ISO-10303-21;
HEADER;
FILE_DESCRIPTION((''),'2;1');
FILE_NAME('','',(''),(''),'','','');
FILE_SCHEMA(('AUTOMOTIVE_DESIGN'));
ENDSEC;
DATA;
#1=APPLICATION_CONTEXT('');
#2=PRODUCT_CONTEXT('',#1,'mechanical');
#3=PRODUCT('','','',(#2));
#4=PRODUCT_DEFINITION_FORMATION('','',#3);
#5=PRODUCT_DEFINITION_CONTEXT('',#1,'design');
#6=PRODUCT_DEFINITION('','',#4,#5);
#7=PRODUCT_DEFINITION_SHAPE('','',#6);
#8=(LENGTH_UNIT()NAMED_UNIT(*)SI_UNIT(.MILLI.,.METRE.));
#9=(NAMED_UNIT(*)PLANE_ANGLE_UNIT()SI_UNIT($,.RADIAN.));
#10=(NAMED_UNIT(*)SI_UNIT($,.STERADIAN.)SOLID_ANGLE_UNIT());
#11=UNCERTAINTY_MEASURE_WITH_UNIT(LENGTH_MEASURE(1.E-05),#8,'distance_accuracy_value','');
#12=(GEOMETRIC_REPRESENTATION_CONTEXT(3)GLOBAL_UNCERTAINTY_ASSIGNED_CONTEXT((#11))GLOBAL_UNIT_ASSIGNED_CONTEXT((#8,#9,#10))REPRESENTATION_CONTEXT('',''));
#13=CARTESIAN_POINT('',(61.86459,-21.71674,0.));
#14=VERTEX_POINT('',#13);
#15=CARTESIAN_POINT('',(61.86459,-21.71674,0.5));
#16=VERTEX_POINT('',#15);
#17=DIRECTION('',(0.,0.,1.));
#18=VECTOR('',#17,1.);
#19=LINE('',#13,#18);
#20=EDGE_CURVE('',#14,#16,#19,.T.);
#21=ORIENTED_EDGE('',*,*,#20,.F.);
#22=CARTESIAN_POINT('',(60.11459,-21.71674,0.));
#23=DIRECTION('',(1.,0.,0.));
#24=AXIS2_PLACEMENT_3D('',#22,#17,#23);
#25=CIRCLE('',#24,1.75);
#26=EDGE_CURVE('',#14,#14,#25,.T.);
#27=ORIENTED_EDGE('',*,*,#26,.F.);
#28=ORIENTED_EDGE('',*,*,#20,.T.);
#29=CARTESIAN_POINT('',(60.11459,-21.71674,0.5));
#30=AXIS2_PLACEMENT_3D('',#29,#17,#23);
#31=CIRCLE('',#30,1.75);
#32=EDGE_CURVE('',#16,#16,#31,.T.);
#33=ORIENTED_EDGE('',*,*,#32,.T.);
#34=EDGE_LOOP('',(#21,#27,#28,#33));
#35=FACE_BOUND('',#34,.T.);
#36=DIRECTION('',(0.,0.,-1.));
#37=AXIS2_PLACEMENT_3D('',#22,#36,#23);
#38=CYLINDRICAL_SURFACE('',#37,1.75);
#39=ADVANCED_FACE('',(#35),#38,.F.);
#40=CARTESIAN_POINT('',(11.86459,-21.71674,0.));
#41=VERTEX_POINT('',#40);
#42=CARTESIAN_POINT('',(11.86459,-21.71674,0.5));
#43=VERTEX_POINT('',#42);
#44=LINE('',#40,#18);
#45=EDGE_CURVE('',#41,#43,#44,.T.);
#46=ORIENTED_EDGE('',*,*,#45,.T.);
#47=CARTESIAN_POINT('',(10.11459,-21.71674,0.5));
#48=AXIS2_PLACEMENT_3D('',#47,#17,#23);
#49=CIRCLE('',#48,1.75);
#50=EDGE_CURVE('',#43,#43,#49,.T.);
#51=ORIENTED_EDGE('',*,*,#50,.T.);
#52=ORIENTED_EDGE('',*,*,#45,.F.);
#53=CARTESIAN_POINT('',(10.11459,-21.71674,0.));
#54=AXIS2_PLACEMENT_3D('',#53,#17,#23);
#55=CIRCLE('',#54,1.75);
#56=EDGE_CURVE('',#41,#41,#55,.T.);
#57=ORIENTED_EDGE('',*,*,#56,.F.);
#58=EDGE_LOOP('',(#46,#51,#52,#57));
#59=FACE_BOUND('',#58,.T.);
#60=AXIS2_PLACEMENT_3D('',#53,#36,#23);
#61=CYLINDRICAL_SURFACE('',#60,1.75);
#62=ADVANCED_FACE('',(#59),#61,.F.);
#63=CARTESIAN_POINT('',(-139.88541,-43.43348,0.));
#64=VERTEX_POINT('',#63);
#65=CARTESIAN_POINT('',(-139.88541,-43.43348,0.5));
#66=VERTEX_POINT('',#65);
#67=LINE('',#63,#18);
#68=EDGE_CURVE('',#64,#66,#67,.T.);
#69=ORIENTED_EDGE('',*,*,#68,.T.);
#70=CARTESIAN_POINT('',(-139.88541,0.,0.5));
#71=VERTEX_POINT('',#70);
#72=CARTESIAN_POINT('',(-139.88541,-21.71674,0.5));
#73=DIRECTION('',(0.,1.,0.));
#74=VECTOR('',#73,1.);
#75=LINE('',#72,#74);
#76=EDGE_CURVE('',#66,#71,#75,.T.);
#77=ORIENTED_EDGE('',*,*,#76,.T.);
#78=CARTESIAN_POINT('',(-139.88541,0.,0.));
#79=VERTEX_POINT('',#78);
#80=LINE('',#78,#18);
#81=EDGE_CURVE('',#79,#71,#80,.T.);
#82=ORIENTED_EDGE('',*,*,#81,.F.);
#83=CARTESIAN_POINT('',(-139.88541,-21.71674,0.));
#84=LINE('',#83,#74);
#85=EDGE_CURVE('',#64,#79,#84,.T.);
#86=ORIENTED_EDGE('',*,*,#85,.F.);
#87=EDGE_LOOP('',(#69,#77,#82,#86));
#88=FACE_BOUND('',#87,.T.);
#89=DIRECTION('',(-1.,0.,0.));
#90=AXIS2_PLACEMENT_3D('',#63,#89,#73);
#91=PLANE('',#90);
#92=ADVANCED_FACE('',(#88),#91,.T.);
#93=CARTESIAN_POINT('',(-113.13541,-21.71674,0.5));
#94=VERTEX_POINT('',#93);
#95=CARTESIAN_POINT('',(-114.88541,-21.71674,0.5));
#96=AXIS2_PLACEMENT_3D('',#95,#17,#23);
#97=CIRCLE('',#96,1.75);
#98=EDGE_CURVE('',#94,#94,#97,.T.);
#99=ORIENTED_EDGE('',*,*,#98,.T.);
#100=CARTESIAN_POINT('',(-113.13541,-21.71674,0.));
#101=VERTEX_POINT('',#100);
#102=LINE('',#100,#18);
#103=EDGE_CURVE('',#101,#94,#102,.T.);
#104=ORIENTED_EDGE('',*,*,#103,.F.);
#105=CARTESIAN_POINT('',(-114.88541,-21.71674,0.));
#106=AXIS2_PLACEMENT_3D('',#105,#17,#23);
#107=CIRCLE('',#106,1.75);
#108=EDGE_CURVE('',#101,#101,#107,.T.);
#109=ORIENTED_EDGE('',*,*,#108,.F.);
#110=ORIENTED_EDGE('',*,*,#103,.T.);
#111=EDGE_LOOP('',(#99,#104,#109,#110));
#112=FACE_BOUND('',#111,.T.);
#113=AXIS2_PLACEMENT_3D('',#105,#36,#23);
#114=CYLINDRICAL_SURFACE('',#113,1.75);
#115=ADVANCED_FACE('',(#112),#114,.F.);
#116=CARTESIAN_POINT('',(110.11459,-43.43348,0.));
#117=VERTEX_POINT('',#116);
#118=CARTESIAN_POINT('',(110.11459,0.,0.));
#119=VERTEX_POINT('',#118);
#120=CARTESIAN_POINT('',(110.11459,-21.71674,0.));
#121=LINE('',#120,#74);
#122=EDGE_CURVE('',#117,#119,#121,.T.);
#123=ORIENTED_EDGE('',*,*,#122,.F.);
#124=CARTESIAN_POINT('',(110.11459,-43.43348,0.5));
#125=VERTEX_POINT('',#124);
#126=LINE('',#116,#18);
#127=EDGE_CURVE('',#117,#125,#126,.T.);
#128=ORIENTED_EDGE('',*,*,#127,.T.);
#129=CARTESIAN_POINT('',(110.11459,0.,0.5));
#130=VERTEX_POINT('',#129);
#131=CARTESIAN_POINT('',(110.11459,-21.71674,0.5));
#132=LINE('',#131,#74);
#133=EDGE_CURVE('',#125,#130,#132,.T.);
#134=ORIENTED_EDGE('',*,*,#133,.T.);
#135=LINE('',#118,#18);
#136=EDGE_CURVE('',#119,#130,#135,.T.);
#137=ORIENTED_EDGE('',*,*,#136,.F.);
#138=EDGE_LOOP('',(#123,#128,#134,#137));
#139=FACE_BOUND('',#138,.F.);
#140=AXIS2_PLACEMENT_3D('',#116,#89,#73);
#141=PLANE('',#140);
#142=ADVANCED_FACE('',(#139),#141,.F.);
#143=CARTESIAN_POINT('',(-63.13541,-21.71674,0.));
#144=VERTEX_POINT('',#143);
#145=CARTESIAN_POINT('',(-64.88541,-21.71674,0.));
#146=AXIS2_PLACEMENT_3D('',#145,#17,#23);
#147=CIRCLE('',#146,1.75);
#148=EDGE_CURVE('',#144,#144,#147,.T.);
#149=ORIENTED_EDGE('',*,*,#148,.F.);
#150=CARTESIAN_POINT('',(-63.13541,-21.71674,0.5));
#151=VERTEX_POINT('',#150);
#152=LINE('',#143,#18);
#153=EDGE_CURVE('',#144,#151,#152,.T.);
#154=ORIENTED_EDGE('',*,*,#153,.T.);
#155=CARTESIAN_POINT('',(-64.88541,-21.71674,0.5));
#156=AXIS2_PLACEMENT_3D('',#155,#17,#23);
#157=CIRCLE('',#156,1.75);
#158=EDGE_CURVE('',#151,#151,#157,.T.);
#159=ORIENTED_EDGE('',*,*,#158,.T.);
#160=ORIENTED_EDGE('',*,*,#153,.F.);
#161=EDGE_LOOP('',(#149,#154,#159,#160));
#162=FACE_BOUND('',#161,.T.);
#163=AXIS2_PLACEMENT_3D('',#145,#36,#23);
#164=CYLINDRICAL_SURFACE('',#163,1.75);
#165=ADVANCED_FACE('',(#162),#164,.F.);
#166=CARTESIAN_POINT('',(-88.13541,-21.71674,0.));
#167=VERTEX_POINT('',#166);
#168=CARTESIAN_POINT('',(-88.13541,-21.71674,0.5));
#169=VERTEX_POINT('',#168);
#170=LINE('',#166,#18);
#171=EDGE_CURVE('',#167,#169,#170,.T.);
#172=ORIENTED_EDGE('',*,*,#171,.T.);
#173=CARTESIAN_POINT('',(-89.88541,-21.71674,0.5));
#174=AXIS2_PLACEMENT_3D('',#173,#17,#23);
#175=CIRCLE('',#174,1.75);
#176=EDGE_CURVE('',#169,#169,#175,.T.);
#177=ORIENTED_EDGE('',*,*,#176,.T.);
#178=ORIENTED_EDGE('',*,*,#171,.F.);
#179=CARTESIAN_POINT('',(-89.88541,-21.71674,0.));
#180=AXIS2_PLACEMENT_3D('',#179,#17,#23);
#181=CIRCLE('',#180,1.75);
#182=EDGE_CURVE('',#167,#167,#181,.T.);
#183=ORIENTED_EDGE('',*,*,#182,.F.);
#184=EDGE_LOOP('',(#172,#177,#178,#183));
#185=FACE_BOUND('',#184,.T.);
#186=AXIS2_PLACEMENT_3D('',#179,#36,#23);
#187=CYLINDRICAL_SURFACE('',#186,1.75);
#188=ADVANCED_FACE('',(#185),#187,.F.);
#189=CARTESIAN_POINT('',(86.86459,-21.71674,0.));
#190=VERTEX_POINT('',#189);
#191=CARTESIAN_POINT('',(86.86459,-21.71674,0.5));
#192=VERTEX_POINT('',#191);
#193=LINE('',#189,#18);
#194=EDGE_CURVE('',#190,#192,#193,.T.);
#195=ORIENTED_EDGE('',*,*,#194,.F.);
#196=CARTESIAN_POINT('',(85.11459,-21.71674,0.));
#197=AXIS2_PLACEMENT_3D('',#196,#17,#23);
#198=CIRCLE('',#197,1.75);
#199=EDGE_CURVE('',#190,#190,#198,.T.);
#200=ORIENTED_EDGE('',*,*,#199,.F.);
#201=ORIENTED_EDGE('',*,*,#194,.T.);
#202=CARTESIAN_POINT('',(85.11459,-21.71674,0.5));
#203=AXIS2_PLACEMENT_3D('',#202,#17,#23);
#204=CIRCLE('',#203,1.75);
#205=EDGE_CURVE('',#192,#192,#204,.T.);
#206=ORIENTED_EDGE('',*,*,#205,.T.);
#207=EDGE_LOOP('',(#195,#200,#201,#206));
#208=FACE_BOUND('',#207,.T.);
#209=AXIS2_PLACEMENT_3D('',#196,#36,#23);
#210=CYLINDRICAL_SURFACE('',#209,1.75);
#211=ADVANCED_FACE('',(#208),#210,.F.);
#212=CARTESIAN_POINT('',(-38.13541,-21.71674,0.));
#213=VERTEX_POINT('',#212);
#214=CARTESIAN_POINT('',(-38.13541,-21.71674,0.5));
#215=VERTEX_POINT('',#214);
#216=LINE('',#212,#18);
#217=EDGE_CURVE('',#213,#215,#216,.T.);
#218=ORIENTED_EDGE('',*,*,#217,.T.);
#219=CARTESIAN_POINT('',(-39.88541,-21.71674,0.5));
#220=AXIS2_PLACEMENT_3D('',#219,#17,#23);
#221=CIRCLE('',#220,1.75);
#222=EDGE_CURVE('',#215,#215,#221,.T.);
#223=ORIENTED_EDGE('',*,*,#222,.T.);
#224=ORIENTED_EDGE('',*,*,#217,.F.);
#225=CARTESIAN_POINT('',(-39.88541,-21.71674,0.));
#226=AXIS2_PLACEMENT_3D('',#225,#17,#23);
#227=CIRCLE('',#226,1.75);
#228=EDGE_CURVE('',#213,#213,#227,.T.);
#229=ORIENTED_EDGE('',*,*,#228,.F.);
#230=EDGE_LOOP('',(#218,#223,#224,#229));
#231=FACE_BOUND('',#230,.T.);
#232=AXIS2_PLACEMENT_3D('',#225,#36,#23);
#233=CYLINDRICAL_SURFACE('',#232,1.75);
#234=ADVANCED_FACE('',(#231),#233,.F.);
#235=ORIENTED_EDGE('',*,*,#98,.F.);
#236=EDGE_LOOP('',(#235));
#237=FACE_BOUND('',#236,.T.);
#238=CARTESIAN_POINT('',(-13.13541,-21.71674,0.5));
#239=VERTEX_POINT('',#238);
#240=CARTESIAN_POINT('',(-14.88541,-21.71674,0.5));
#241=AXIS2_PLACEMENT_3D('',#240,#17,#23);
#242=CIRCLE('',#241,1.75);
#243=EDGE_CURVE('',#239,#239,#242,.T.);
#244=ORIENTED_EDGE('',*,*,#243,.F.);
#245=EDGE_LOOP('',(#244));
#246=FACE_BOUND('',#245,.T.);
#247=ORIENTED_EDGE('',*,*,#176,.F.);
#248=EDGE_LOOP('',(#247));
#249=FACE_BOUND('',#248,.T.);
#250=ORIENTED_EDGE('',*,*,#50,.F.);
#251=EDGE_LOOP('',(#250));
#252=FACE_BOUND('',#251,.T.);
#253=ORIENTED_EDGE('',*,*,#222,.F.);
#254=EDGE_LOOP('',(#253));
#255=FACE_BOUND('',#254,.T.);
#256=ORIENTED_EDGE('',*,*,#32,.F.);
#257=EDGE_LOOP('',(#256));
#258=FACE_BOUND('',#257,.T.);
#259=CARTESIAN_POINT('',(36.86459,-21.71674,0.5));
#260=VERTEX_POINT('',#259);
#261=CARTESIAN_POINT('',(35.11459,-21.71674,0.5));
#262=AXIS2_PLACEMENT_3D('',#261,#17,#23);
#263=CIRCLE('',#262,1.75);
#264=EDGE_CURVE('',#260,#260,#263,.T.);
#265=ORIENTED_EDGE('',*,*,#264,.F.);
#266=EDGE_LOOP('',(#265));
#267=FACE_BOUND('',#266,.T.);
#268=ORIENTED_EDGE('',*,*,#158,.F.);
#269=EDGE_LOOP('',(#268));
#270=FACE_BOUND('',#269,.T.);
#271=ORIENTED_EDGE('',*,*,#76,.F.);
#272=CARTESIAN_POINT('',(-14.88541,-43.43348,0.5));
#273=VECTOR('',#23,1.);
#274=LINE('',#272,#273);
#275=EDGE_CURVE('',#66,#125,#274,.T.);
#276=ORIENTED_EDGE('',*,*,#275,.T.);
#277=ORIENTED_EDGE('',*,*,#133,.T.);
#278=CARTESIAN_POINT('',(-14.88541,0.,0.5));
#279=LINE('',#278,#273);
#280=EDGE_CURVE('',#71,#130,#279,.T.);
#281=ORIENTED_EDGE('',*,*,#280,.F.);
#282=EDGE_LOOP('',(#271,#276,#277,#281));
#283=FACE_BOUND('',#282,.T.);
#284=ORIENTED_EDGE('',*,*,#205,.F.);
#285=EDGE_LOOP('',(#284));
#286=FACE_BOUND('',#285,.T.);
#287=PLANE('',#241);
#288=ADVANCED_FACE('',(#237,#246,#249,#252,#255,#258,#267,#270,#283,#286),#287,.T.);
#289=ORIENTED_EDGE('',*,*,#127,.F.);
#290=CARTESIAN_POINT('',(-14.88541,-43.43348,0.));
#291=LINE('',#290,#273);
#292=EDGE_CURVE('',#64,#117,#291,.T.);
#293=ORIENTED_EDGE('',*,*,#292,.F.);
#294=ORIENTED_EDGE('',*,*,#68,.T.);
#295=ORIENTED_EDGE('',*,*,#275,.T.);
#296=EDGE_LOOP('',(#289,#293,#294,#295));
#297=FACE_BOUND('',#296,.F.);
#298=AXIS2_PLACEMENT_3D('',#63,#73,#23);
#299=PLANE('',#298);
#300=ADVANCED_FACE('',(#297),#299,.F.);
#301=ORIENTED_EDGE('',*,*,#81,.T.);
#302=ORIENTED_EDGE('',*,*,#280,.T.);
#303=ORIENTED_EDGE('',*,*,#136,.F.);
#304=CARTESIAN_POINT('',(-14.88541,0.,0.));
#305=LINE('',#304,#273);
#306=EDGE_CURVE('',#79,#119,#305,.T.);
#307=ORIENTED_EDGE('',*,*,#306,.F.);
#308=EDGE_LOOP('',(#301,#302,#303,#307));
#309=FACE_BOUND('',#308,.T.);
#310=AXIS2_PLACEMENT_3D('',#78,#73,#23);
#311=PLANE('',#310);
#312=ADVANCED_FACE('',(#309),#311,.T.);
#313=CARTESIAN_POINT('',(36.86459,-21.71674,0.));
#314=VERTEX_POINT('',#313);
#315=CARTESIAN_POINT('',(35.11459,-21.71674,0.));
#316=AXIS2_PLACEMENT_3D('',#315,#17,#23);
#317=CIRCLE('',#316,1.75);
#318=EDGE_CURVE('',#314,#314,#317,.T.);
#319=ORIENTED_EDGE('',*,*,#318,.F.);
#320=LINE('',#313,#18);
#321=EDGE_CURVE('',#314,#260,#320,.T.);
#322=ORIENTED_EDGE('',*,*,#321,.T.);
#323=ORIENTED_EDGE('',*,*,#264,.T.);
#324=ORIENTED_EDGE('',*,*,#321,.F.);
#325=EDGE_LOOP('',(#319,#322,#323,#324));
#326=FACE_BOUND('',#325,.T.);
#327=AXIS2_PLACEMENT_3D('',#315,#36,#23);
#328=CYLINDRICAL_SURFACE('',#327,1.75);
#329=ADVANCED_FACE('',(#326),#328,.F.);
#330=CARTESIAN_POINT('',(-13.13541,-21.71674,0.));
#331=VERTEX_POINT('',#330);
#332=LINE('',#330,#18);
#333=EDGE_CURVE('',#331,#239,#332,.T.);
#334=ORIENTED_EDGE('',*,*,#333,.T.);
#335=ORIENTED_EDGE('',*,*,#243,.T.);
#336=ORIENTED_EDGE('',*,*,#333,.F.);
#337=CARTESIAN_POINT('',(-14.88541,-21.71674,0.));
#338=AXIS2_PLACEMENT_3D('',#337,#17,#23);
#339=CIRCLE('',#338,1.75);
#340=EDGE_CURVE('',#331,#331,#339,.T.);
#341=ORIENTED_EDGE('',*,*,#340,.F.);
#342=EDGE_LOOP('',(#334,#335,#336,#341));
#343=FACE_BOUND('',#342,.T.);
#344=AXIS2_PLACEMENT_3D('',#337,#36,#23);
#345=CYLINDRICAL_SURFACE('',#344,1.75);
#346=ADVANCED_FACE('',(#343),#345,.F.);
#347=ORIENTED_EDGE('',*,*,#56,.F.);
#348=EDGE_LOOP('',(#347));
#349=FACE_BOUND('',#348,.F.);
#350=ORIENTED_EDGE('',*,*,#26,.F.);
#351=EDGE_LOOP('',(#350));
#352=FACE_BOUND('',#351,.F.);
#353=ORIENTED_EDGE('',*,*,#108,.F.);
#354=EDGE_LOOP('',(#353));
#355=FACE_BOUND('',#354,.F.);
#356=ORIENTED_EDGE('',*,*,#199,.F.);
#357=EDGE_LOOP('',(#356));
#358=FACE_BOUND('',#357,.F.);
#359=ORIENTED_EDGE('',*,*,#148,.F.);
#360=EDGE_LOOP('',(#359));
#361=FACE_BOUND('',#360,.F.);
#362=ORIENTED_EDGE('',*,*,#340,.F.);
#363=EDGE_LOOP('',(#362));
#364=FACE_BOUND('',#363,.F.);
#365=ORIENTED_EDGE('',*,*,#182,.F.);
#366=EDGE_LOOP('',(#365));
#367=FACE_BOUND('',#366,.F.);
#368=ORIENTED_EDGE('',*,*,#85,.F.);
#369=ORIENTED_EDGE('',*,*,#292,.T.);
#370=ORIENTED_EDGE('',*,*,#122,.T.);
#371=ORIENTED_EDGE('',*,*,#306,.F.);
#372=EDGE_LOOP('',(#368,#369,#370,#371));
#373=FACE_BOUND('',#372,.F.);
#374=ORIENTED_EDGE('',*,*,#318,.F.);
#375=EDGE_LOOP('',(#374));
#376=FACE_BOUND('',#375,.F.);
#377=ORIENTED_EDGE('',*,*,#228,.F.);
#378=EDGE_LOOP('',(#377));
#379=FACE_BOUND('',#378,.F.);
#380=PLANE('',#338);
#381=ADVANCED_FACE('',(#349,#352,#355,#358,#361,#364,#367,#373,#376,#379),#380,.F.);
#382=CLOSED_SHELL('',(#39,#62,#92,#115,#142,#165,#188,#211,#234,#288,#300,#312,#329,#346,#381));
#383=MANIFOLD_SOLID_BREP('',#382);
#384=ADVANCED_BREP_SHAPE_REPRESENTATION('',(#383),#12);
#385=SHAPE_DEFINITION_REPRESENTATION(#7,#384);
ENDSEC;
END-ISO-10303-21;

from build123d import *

# Parameters (mm, degrees)
F0_W     = 250
F0_H     = 43.4334799647
F0_R     = 1.75
F2_DEPTH = 0.5


# Not quite as in the source:
# - the program builds the solid bodies; features that only make, move or delete a surface that nothing else refers to are left out


with BuildPart() as f2:
    # F0 (on Top) → F2 (new body)
    with BuildSketch(Plane.XY):
        with Locations((-14.8854096483, -21.7167399824)):
            Rectangle(F0_W, F0_H)
        with Locations((-114.8854096483, -21.7167399824)):
            Circle(F0_R, mode=Mode.SUBTRACT)
        with Locations((-89.8854096483, -21.7167399824)):
            Circle(F0_R, mode=Mode.SUBTRACT)
        with Locations((-64.8854096483, -21.7167399824)):
            Circle(F0_R, mode=Mode.SUBTRACT)
        with Locations((-39.8854096483, -21.7167399824)):
            Circle(F0_R, mode=Mode.SUBTRACT)
        with Locations((-14.8854096483, -21.7167399824)):
            Circle(F0_R, mode=Mode.SUBTRACT)
        with Locations((10.1145903517, -21.7167399824)):
            Circle(F0_R, mode=Mode.SUBTRACT)
        with Locations((35.1145903517, -21.7167399824)):
            Circle(F0_R, mode=Mode.SUBTRACT)
        with Locations((60.1145903517, -21.7167399824)):
            Circle(F0_R, mode=Mode.SUBTRACT)
        with Locations((85.1145903517, -21.7167399824)):
            Circle(F0_R, mode=Mode.SUBTRACT)
    extrude(amount=F2_DEPTH)


solid = f2.part
